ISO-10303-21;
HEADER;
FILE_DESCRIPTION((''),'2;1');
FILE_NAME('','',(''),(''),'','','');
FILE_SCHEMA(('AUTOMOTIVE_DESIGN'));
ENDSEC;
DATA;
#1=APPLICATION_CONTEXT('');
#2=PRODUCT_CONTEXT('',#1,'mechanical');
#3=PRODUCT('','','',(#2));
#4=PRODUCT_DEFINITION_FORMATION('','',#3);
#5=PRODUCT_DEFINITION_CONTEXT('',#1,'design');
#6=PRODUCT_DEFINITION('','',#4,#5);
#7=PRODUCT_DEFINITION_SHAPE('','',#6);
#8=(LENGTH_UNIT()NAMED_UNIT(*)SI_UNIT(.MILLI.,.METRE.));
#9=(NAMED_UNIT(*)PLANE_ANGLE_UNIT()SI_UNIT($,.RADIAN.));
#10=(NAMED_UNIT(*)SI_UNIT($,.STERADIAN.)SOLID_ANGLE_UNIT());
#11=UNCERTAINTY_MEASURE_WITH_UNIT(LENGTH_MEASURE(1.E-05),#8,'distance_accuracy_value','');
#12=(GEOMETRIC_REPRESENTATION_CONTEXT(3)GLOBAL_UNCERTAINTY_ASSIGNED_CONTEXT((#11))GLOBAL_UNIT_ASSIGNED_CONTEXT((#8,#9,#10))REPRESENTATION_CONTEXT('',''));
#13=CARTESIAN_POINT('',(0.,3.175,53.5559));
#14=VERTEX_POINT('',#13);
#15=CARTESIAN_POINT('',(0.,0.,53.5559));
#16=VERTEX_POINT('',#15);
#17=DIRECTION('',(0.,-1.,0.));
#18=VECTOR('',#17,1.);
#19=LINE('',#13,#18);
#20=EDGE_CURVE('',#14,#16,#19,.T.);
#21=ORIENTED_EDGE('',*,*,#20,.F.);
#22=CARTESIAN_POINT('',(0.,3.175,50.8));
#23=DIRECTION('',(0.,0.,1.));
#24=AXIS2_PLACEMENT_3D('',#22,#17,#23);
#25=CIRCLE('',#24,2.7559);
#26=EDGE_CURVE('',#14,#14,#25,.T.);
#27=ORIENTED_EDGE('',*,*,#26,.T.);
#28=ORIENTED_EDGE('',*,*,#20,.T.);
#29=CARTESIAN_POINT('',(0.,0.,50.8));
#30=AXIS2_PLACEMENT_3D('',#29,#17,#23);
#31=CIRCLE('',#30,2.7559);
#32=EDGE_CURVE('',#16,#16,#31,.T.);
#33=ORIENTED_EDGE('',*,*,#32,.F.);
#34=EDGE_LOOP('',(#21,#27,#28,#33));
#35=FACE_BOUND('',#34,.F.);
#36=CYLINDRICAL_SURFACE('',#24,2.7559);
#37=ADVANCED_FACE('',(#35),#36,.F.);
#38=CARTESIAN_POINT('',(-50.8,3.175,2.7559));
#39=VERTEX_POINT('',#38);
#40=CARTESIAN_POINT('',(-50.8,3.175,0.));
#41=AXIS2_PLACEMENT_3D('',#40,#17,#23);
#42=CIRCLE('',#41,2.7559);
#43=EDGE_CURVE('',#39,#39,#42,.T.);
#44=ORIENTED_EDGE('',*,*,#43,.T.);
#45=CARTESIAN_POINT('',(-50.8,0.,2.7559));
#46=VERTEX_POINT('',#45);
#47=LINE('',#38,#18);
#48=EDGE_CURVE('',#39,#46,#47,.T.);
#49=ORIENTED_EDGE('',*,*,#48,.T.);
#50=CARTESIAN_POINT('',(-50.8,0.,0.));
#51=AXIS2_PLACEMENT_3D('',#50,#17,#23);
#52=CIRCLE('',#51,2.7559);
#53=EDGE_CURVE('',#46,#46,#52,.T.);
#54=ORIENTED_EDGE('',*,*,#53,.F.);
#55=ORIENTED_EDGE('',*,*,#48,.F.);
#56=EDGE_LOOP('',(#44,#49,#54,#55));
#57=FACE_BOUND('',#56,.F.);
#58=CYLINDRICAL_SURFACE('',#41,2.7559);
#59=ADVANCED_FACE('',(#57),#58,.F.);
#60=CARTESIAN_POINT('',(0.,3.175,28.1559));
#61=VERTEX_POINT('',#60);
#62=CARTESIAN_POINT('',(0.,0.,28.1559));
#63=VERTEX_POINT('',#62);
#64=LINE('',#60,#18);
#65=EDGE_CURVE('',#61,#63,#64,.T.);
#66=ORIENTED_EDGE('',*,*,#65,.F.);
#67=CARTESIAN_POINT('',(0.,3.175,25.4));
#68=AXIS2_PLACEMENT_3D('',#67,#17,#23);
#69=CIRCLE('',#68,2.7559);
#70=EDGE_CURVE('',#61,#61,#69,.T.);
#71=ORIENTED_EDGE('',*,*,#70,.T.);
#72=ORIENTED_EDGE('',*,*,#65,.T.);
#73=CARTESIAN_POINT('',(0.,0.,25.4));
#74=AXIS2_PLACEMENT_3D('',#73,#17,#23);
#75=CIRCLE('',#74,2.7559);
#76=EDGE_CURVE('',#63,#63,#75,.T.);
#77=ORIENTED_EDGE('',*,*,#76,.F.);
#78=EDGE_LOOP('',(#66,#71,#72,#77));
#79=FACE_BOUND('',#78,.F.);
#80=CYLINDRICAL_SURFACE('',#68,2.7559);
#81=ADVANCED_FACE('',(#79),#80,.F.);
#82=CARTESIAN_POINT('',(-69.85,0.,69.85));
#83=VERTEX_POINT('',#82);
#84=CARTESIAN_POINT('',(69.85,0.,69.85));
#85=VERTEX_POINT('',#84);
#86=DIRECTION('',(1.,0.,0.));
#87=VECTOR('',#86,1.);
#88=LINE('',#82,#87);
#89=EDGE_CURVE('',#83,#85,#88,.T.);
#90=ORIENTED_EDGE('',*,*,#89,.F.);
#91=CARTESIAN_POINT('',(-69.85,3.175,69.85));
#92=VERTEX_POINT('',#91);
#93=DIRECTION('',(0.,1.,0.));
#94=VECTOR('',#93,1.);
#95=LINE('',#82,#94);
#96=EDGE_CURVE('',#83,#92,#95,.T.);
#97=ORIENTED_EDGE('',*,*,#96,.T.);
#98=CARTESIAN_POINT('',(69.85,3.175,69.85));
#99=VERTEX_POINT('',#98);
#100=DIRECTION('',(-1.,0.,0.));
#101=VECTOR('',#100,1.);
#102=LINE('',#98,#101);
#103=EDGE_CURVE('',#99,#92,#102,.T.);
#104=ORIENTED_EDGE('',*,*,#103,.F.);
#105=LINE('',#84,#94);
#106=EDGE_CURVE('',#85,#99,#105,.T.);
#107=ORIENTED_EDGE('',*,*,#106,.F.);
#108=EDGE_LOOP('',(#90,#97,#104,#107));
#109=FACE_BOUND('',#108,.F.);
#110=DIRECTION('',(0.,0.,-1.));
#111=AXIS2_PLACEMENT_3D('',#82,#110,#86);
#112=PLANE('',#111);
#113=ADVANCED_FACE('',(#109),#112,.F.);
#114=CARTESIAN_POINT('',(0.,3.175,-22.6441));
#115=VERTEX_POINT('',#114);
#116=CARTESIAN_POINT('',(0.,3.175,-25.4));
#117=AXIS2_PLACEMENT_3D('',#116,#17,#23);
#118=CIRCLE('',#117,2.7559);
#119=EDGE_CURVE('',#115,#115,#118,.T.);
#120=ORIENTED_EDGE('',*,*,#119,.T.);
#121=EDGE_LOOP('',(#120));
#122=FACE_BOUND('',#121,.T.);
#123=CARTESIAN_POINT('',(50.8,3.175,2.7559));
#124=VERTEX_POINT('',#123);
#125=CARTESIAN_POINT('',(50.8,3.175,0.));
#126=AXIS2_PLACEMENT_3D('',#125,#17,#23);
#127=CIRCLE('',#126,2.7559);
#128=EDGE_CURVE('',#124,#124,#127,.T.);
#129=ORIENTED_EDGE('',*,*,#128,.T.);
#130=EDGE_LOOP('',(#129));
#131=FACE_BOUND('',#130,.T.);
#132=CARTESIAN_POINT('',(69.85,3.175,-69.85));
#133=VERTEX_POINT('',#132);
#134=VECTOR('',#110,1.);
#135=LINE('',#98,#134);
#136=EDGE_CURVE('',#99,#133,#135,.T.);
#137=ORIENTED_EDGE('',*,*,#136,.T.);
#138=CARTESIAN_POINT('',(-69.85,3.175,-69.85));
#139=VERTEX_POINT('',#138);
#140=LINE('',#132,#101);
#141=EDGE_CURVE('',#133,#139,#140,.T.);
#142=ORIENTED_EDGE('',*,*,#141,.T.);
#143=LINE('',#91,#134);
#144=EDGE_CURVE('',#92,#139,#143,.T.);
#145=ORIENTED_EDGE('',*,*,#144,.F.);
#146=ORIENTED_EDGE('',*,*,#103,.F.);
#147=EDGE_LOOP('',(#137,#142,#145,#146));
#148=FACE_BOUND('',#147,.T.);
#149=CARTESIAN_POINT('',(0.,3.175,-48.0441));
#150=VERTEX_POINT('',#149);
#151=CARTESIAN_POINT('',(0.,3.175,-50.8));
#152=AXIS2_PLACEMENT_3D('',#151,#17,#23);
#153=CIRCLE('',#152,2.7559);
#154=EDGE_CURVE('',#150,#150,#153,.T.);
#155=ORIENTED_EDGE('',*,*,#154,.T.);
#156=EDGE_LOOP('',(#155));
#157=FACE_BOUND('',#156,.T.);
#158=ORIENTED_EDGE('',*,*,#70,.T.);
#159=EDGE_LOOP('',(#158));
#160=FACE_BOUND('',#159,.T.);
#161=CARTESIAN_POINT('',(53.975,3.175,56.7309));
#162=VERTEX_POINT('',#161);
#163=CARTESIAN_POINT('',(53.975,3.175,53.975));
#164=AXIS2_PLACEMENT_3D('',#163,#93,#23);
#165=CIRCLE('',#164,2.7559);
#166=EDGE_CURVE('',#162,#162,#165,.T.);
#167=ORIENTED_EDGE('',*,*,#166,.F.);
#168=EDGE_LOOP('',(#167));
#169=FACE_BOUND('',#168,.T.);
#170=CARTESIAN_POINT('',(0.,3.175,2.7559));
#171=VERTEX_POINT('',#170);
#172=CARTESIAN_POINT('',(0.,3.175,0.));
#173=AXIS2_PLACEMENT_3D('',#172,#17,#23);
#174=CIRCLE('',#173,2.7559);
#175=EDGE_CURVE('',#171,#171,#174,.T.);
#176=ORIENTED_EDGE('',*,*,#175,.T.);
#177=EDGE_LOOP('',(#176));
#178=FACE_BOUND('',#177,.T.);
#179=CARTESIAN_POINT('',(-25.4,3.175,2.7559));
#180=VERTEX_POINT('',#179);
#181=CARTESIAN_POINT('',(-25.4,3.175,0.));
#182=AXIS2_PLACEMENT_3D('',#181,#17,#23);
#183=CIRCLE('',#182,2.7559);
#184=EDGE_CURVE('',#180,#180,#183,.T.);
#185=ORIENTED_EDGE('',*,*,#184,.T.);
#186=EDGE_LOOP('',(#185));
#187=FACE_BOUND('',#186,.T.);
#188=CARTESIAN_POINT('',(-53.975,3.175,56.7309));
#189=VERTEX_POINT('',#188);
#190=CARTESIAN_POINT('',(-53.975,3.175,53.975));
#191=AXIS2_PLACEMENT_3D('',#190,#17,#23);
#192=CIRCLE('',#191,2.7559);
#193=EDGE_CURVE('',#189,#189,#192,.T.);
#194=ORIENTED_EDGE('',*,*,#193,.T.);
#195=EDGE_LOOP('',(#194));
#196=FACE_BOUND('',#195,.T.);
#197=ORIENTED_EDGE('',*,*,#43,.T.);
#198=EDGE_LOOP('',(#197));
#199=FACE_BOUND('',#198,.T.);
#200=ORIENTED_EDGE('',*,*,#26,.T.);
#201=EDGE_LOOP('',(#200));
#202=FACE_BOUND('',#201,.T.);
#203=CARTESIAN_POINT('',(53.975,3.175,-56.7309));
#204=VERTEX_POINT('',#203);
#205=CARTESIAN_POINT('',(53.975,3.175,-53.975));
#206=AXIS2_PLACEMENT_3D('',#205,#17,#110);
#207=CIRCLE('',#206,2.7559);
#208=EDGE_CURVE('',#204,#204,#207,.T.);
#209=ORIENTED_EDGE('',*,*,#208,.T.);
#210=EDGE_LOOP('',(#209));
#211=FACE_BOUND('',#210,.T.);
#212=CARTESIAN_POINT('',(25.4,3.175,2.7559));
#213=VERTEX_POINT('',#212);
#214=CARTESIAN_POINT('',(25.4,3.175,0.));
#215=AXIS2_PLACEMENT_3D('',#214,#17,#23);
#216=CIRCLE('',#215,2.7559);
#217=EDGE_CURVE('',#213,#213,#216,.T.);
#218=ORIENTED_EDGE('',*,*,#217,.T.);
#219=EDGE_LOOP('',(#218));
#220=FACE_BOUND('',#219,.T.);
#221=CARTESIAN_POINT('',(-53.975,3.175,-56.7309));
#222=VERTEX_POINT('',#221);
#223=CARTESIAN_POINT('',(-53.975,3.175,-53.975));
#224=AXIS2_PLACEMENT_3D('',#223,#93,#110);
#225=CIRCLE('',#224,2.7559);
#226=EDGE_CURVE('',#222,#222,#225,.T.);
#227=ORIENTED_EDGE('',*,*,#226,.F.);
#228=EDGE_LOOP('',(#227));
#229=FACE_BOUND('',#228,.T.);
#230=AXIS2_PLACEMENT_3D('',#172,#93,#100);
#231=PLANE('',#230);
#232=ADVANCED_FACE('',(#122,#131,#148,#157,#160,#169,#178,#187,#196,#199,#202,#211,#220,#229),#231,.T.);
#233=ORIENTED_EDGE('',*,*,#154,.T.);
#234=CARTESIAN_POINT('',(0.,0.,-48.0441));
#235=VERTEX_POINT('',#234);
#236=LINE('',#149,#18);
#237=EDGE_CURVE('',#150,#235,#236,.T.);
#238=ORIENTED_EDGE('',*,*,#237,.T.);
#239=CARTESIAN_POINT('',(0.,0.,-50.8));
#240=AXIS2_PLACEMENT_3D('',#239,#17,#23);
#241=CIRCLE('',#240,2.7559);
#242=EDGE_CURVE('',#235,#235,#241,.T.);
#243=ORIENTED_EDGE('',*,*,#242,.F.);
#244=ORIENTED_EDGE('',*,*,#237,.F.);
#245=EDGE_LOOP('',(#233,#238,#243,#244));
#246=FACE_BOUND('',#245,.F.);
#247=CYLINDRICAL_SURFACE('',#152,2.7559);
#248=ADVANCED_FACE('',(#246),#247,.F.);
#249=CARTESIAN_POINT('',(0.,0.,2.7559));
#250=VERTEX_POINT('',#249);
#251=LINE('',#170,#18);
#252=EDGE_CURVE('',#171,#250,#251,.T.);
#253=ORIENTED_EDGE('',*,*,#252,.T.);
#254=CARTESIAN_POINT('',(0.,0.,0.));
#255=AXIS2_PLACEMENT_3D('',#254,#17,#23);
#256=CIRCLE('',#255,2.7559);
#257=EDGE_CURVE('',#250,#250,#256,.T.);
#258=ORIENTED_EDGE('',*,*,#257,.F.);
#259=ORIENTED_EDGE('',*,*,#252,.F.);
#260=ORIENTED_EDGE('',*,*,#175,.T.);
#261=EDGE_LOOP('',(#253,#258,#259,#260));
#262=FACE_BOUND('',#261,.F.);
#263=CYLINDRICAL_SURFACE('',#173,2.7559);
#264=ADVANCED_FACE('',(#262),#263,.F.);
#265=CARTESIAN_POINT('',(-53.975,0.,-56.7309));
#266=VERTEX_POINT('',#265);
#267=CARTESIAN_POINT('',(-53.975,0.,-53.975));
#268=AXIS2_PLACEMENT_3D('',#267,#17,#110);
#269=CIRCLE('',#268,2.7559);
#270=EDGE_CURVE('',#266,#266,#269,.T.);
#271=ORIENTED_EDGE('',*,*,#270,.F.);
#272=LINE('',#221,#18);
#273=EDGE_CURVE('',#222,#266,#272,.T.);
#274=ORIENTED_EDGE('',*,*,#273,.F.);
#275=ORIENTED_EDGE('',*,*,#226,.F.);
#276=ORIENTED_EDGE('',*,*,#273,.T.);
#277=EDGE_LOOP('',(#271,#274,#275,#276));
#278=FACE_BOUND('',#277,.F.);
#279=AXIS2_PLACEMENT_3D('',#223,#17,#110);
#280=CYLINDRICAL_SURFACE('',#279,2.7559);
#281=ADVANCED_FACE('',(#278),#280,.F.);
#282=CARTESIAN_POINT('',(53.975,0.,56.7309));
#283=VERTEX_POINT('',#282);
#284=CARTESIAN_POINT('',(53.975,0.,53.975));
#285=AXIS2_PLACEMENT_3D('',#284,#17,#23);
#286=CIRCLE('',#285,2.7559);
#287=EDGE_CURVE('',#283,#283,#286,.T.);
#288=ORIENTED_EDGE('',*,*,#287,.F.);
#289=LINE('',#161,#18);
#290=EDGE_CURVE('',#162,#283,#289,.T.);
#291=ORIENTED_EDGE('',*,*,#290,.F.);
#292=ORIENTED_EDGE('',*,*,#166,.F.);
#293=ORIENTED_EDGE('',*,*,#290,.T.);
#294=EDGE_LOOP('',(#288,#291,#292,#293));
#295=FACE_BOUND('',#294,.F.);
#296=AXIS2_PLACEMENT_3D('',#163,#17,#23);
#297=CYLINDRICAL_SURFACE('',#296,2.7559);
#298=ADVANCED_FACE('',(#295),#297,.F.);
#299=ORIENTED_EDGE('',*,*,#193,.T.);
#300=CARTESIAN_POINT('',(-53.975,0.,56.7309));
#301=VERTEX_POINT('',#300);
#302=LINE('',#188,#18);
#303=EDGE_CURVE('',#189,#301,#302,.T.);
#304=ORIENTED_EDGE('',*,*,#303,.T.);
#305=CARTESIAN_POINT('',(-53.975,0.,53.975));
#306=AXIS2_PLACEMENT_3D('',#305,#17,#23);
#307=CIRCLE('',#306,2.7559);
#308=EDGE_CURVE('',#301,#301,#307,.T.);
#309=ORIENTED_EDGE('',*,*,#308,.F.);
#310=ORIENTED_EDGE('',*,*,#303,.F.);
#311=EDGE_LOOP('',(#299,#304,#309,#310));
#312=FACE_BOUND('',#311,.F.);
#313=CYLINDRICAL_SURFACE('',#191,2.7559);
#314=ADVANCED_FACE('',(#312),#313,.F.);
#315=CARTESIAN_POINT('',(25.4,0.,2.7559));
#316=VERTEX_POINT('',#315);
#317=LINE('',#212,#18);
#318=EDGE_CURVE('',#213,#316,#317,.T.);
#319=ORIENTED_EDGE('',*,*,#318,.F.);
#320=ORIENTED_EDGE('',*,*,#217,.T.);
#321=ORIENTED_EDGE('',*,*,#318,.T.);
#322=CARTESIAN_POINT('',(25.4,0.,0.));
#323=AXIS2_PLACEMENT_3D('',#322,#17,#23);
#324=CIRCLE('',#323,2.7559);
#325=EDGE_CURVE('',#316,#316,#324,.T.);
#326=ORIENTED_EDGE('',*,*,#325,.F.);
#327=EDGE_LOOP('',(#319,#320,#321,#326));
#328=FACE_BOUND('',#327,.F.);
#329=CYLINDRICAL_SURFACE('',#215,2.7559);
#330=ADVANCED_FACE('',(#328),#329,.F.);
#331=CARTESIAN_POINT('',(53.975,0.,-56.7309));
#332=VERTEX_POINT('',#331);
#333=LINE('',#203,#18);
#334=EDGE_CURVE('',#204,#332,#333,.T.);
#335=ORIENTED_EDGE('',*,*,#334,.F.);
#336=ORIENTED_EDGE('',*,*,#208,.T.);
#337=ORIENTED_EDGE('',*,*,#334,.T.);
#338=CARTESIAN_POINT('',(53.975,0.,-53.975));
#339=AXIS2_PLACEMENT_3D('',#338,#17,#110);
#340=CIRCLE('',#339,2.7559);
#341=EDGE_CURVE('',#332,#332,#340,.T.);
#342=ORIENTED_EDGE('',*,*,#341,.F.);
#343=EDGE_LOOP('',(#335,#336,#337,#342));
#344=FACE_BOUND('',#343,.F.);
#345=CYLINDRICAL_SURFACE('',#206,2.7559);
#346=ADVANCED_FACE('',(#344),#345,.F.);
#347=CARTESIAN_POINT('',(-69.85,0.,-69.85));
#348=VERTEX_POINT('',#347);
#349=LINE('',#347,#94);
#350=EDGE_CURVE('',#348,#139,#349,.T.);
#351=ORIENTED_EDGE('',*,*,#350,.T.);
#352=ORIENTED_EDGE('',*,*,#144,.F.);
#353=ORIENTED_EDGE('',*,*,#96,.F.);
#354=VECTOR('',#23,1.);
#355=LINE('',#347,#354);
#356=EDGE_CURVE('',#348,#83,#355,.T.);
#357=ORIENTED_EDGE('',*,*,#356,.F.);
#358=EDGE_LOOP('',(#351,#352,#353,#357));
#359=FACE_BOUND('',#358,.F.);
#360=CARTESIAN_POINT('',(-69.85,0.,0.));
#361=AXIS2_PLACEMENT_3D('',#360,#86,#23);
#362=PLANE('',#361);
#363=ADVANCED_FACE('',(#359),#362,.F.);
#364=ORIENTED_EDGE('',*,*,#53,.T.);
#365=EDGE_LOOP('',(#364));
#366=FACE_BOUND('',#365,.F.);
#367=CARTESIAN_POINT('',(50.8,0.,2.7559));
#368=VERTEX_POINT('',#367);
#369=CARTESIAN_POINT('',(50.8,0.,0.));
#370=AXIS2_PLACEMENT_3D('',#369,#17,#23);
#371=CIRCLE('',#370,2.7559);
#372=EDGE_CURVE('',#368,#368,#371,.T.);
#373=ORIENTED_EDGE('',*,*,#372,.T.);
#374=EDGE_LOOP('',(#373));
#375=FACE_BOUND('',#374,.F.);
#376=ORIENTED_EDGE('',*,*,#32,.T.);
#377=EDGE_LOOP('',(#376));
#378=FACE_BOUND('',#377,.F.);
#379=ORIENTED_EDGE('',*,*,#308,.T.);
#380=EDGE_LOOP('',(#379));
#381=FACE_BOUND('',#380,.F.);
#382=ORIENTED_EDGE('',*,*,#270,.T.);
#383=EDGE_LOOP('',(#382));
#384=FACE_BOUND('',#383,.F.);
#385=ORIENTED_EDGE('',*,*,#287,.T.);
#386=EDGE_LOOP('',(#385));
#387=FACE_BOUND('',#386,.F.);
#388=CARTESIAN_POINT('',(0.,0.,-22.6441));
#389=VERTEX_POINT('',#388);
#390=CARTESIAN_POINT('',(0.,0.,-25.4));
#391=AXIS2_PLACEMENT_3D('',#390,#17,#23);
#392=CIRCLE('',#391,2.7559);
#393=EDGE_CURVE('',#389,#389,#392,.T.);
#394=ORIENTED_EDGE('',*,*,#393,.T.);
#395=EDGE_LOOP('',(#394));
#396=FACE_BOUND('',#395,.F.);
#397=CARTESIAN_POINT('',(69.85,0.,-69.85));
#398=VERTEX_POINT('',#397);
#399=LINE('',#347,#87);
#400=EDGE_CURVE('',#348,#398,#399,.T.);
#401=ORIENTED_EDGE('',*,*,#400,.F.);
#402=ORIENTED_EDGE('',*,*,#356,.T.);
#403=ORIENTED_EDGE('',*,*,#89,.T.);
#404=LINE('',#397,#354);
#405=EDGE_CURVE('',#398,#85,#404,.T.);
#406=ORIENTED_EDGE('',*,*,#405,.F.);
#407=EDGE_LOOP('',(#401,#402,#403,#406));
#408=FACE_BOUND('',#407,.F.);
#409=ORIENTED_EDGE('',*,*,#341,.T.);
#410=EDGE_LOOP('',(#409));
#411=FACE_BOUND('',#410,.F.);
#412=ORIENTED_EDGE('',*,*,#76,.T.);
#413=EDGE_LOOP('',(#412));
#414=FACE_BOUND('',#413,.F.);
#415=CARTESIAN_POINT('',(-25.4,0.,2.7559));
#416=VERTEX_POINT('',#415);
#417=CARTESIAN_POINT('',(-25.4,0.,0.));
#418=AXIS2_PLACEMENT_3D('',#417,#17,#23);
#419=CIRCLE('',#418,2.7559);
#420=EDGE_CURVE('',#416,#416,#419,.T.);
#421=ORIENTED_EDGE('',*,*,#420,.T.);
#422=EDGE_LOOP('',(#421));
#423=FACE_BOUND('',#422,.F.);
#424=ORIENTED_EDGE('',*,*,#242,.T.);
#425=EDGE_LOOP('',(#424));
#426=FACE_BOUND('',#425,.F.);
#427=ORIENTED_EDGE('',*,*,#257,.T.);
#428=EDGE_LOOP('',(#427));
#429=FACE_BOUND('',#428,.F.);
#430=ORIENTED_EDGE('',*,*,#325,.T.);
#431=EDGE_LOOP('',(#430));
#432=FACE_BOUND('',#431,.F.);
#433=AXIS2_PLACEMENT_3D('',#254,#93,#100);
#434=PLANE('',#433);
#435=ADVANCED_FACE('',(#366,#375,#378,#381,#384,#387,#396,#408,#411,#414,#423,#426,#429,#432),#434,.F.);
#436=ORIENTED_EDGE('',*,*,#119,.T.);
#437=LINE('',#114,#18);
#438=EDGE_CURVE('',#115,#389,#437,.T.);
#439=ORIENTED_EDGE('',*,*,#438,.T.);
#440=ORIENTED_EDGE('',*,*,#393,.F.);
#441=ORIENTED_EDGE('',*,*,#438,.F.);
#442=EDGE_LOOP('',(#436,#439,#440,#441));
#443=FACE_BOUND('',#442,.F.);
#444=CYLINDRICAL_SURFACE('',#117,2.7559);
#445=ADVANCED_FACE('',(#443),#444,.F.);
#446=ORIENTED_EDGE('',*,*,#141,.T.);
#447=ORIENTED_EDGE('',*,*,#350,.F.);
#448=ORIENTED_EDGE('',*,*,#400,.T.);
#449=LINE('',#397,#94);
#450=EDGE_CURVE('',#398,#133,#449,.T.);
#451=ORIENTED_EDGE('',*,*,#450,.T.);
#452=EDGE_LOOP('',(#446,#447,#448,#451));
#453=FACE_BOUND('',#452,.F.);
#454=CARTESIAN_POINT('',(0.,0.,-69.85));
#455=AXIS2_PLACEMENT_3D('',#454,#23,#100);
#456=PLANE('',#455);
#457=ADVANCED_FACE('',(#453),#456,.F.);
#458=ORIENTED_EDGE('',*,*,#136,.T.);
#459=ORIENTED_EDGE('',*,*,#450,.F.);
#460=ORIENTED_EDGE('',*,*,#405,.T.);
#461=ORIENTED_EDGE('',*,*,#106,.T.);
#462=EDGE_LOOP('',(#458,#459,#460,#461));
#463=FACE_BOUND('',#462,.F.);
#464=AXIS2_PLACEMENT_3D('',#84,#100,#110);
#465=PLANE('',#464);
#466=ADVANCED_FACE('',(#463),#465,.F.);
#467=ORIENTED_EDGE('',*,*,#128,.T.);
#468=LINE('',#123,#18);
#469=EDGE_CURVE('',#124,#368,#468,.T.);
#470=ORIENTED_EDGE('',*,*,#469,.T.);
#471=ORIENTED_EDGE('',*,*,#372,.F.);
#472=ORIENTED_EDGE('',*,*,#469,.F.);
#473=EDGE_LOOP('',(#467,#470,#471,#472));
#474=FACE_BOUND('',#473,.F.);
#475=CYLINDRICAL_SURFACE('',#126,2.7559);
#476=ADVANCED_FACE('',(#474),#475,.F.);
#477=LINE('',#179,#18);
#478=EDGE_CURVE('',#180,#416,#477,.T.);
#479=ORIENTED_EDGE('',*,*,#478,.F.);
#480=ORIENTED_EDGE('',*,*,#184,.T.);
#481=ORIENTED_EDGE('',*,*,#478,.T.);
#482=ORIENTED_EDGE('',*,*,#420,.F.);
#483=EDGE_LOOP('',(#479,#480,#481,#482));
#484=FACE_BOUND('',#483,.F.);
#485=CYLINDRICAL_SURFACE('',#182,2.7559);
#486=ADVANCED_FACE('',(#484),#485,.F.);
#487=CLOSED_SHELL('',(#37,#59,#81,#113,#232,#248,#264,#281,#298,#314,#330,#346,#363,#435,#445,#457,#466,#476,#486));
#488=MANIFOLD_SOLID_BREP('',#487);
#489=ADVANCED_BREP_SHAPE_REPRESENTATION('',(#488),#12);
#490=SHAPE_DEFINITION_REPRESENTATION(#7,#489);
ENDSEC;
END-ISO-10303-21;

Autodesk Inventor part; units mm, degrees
ref_plane "YZ Plane" through (0, 0, 0) normal (1, 0, 0) x (0, 1, 0)
ref_plane "XZ Plane" through (0, 0, 0) normal (0, 1, 0) x (-1, 0, 0)
ref_plane "XY Plane" through (0, 0, 0) normal (0, 0, 1) x (1, 0, 0)
sketch "Sketch1" plane through (0, 0, 0) normal (0, 1, 0) x (-1, 0, 0)
  line L0 (69.85, 69.85) -> (-69.85, 69.85)
  line L1 (-69.85, 69.85) -> (-69.85, -69.85)
  line L2 (-69.85, -69.85) -> (69.85, -69.85)
  line L3 (69.85, -69.85) -> (69.85, 69.85)
  line L4 (97.79, 0) -> (-97.79, 0) projected
  line L5 (0, -97.79) -> (0, 97.79) projected
  point P0 (0, 0)
  dimension "d0" = 139.7
  dimension "d1" = 139.7
extrude "Extrusion1" add sketch "Sketch1" along normal blind 3.175
sketch "Sketch2" plane through (0, 3.175, 0) normal (0, 1, 0) x (1, 0, 0)
  line L0 (-69.85, 69.85) -> (-69.85, -69.85) projected
  line L1 (-69.85, -69.85) -> (-69.85, -53.975)
  line L2 (-69.85, -53.975) -> (-53.975, -53.975)
  point P0 (0, 0)
  dimension "d4" = 15.875
  dimension "d5" = 15.875
hole "Hole1" at (-53.975, 3.175, 53.975) direction (0, -1, 0) diameter 5.5118 depth 14.1986 tip angle 118 clearance for "Flat Head Machine Screw" size "M5" standard "Ansi Metric M Profile"
mirror "Mirror4" about plane through (0, 0, 0) normal (0, 0, 1) of "Hole1"
mirror "Mirror5" about plane through (0, 0, 0) normal (1, 0, 0) of "Hole1", "Mirror4"
sketch "Sketch5" plane through (0, 3.175, 0) normal (0, 1, 0) x (1, 0, 0)
  point P0 (0, 0)
  point P1 (0, 0)
hole "Hole3" at (0, 3.175, 0) direction (0, -1, 0) diameter 5.5118 end through all
pattern_linear "Rectangular Pattern2" count 5 spacing 25.4 along (1, 0, 0) of "Hole3" first direction both ways yes
pattern_linear "Rectangular Pattern3" count 5 spacing 25.4 along (0, 0, 1) of "Hole3" first direction both ways yes
equation "\"d0\" = d1"
equation "\"d4\" = d5"
properties part number "DIFF_HOUSING_TOP"
